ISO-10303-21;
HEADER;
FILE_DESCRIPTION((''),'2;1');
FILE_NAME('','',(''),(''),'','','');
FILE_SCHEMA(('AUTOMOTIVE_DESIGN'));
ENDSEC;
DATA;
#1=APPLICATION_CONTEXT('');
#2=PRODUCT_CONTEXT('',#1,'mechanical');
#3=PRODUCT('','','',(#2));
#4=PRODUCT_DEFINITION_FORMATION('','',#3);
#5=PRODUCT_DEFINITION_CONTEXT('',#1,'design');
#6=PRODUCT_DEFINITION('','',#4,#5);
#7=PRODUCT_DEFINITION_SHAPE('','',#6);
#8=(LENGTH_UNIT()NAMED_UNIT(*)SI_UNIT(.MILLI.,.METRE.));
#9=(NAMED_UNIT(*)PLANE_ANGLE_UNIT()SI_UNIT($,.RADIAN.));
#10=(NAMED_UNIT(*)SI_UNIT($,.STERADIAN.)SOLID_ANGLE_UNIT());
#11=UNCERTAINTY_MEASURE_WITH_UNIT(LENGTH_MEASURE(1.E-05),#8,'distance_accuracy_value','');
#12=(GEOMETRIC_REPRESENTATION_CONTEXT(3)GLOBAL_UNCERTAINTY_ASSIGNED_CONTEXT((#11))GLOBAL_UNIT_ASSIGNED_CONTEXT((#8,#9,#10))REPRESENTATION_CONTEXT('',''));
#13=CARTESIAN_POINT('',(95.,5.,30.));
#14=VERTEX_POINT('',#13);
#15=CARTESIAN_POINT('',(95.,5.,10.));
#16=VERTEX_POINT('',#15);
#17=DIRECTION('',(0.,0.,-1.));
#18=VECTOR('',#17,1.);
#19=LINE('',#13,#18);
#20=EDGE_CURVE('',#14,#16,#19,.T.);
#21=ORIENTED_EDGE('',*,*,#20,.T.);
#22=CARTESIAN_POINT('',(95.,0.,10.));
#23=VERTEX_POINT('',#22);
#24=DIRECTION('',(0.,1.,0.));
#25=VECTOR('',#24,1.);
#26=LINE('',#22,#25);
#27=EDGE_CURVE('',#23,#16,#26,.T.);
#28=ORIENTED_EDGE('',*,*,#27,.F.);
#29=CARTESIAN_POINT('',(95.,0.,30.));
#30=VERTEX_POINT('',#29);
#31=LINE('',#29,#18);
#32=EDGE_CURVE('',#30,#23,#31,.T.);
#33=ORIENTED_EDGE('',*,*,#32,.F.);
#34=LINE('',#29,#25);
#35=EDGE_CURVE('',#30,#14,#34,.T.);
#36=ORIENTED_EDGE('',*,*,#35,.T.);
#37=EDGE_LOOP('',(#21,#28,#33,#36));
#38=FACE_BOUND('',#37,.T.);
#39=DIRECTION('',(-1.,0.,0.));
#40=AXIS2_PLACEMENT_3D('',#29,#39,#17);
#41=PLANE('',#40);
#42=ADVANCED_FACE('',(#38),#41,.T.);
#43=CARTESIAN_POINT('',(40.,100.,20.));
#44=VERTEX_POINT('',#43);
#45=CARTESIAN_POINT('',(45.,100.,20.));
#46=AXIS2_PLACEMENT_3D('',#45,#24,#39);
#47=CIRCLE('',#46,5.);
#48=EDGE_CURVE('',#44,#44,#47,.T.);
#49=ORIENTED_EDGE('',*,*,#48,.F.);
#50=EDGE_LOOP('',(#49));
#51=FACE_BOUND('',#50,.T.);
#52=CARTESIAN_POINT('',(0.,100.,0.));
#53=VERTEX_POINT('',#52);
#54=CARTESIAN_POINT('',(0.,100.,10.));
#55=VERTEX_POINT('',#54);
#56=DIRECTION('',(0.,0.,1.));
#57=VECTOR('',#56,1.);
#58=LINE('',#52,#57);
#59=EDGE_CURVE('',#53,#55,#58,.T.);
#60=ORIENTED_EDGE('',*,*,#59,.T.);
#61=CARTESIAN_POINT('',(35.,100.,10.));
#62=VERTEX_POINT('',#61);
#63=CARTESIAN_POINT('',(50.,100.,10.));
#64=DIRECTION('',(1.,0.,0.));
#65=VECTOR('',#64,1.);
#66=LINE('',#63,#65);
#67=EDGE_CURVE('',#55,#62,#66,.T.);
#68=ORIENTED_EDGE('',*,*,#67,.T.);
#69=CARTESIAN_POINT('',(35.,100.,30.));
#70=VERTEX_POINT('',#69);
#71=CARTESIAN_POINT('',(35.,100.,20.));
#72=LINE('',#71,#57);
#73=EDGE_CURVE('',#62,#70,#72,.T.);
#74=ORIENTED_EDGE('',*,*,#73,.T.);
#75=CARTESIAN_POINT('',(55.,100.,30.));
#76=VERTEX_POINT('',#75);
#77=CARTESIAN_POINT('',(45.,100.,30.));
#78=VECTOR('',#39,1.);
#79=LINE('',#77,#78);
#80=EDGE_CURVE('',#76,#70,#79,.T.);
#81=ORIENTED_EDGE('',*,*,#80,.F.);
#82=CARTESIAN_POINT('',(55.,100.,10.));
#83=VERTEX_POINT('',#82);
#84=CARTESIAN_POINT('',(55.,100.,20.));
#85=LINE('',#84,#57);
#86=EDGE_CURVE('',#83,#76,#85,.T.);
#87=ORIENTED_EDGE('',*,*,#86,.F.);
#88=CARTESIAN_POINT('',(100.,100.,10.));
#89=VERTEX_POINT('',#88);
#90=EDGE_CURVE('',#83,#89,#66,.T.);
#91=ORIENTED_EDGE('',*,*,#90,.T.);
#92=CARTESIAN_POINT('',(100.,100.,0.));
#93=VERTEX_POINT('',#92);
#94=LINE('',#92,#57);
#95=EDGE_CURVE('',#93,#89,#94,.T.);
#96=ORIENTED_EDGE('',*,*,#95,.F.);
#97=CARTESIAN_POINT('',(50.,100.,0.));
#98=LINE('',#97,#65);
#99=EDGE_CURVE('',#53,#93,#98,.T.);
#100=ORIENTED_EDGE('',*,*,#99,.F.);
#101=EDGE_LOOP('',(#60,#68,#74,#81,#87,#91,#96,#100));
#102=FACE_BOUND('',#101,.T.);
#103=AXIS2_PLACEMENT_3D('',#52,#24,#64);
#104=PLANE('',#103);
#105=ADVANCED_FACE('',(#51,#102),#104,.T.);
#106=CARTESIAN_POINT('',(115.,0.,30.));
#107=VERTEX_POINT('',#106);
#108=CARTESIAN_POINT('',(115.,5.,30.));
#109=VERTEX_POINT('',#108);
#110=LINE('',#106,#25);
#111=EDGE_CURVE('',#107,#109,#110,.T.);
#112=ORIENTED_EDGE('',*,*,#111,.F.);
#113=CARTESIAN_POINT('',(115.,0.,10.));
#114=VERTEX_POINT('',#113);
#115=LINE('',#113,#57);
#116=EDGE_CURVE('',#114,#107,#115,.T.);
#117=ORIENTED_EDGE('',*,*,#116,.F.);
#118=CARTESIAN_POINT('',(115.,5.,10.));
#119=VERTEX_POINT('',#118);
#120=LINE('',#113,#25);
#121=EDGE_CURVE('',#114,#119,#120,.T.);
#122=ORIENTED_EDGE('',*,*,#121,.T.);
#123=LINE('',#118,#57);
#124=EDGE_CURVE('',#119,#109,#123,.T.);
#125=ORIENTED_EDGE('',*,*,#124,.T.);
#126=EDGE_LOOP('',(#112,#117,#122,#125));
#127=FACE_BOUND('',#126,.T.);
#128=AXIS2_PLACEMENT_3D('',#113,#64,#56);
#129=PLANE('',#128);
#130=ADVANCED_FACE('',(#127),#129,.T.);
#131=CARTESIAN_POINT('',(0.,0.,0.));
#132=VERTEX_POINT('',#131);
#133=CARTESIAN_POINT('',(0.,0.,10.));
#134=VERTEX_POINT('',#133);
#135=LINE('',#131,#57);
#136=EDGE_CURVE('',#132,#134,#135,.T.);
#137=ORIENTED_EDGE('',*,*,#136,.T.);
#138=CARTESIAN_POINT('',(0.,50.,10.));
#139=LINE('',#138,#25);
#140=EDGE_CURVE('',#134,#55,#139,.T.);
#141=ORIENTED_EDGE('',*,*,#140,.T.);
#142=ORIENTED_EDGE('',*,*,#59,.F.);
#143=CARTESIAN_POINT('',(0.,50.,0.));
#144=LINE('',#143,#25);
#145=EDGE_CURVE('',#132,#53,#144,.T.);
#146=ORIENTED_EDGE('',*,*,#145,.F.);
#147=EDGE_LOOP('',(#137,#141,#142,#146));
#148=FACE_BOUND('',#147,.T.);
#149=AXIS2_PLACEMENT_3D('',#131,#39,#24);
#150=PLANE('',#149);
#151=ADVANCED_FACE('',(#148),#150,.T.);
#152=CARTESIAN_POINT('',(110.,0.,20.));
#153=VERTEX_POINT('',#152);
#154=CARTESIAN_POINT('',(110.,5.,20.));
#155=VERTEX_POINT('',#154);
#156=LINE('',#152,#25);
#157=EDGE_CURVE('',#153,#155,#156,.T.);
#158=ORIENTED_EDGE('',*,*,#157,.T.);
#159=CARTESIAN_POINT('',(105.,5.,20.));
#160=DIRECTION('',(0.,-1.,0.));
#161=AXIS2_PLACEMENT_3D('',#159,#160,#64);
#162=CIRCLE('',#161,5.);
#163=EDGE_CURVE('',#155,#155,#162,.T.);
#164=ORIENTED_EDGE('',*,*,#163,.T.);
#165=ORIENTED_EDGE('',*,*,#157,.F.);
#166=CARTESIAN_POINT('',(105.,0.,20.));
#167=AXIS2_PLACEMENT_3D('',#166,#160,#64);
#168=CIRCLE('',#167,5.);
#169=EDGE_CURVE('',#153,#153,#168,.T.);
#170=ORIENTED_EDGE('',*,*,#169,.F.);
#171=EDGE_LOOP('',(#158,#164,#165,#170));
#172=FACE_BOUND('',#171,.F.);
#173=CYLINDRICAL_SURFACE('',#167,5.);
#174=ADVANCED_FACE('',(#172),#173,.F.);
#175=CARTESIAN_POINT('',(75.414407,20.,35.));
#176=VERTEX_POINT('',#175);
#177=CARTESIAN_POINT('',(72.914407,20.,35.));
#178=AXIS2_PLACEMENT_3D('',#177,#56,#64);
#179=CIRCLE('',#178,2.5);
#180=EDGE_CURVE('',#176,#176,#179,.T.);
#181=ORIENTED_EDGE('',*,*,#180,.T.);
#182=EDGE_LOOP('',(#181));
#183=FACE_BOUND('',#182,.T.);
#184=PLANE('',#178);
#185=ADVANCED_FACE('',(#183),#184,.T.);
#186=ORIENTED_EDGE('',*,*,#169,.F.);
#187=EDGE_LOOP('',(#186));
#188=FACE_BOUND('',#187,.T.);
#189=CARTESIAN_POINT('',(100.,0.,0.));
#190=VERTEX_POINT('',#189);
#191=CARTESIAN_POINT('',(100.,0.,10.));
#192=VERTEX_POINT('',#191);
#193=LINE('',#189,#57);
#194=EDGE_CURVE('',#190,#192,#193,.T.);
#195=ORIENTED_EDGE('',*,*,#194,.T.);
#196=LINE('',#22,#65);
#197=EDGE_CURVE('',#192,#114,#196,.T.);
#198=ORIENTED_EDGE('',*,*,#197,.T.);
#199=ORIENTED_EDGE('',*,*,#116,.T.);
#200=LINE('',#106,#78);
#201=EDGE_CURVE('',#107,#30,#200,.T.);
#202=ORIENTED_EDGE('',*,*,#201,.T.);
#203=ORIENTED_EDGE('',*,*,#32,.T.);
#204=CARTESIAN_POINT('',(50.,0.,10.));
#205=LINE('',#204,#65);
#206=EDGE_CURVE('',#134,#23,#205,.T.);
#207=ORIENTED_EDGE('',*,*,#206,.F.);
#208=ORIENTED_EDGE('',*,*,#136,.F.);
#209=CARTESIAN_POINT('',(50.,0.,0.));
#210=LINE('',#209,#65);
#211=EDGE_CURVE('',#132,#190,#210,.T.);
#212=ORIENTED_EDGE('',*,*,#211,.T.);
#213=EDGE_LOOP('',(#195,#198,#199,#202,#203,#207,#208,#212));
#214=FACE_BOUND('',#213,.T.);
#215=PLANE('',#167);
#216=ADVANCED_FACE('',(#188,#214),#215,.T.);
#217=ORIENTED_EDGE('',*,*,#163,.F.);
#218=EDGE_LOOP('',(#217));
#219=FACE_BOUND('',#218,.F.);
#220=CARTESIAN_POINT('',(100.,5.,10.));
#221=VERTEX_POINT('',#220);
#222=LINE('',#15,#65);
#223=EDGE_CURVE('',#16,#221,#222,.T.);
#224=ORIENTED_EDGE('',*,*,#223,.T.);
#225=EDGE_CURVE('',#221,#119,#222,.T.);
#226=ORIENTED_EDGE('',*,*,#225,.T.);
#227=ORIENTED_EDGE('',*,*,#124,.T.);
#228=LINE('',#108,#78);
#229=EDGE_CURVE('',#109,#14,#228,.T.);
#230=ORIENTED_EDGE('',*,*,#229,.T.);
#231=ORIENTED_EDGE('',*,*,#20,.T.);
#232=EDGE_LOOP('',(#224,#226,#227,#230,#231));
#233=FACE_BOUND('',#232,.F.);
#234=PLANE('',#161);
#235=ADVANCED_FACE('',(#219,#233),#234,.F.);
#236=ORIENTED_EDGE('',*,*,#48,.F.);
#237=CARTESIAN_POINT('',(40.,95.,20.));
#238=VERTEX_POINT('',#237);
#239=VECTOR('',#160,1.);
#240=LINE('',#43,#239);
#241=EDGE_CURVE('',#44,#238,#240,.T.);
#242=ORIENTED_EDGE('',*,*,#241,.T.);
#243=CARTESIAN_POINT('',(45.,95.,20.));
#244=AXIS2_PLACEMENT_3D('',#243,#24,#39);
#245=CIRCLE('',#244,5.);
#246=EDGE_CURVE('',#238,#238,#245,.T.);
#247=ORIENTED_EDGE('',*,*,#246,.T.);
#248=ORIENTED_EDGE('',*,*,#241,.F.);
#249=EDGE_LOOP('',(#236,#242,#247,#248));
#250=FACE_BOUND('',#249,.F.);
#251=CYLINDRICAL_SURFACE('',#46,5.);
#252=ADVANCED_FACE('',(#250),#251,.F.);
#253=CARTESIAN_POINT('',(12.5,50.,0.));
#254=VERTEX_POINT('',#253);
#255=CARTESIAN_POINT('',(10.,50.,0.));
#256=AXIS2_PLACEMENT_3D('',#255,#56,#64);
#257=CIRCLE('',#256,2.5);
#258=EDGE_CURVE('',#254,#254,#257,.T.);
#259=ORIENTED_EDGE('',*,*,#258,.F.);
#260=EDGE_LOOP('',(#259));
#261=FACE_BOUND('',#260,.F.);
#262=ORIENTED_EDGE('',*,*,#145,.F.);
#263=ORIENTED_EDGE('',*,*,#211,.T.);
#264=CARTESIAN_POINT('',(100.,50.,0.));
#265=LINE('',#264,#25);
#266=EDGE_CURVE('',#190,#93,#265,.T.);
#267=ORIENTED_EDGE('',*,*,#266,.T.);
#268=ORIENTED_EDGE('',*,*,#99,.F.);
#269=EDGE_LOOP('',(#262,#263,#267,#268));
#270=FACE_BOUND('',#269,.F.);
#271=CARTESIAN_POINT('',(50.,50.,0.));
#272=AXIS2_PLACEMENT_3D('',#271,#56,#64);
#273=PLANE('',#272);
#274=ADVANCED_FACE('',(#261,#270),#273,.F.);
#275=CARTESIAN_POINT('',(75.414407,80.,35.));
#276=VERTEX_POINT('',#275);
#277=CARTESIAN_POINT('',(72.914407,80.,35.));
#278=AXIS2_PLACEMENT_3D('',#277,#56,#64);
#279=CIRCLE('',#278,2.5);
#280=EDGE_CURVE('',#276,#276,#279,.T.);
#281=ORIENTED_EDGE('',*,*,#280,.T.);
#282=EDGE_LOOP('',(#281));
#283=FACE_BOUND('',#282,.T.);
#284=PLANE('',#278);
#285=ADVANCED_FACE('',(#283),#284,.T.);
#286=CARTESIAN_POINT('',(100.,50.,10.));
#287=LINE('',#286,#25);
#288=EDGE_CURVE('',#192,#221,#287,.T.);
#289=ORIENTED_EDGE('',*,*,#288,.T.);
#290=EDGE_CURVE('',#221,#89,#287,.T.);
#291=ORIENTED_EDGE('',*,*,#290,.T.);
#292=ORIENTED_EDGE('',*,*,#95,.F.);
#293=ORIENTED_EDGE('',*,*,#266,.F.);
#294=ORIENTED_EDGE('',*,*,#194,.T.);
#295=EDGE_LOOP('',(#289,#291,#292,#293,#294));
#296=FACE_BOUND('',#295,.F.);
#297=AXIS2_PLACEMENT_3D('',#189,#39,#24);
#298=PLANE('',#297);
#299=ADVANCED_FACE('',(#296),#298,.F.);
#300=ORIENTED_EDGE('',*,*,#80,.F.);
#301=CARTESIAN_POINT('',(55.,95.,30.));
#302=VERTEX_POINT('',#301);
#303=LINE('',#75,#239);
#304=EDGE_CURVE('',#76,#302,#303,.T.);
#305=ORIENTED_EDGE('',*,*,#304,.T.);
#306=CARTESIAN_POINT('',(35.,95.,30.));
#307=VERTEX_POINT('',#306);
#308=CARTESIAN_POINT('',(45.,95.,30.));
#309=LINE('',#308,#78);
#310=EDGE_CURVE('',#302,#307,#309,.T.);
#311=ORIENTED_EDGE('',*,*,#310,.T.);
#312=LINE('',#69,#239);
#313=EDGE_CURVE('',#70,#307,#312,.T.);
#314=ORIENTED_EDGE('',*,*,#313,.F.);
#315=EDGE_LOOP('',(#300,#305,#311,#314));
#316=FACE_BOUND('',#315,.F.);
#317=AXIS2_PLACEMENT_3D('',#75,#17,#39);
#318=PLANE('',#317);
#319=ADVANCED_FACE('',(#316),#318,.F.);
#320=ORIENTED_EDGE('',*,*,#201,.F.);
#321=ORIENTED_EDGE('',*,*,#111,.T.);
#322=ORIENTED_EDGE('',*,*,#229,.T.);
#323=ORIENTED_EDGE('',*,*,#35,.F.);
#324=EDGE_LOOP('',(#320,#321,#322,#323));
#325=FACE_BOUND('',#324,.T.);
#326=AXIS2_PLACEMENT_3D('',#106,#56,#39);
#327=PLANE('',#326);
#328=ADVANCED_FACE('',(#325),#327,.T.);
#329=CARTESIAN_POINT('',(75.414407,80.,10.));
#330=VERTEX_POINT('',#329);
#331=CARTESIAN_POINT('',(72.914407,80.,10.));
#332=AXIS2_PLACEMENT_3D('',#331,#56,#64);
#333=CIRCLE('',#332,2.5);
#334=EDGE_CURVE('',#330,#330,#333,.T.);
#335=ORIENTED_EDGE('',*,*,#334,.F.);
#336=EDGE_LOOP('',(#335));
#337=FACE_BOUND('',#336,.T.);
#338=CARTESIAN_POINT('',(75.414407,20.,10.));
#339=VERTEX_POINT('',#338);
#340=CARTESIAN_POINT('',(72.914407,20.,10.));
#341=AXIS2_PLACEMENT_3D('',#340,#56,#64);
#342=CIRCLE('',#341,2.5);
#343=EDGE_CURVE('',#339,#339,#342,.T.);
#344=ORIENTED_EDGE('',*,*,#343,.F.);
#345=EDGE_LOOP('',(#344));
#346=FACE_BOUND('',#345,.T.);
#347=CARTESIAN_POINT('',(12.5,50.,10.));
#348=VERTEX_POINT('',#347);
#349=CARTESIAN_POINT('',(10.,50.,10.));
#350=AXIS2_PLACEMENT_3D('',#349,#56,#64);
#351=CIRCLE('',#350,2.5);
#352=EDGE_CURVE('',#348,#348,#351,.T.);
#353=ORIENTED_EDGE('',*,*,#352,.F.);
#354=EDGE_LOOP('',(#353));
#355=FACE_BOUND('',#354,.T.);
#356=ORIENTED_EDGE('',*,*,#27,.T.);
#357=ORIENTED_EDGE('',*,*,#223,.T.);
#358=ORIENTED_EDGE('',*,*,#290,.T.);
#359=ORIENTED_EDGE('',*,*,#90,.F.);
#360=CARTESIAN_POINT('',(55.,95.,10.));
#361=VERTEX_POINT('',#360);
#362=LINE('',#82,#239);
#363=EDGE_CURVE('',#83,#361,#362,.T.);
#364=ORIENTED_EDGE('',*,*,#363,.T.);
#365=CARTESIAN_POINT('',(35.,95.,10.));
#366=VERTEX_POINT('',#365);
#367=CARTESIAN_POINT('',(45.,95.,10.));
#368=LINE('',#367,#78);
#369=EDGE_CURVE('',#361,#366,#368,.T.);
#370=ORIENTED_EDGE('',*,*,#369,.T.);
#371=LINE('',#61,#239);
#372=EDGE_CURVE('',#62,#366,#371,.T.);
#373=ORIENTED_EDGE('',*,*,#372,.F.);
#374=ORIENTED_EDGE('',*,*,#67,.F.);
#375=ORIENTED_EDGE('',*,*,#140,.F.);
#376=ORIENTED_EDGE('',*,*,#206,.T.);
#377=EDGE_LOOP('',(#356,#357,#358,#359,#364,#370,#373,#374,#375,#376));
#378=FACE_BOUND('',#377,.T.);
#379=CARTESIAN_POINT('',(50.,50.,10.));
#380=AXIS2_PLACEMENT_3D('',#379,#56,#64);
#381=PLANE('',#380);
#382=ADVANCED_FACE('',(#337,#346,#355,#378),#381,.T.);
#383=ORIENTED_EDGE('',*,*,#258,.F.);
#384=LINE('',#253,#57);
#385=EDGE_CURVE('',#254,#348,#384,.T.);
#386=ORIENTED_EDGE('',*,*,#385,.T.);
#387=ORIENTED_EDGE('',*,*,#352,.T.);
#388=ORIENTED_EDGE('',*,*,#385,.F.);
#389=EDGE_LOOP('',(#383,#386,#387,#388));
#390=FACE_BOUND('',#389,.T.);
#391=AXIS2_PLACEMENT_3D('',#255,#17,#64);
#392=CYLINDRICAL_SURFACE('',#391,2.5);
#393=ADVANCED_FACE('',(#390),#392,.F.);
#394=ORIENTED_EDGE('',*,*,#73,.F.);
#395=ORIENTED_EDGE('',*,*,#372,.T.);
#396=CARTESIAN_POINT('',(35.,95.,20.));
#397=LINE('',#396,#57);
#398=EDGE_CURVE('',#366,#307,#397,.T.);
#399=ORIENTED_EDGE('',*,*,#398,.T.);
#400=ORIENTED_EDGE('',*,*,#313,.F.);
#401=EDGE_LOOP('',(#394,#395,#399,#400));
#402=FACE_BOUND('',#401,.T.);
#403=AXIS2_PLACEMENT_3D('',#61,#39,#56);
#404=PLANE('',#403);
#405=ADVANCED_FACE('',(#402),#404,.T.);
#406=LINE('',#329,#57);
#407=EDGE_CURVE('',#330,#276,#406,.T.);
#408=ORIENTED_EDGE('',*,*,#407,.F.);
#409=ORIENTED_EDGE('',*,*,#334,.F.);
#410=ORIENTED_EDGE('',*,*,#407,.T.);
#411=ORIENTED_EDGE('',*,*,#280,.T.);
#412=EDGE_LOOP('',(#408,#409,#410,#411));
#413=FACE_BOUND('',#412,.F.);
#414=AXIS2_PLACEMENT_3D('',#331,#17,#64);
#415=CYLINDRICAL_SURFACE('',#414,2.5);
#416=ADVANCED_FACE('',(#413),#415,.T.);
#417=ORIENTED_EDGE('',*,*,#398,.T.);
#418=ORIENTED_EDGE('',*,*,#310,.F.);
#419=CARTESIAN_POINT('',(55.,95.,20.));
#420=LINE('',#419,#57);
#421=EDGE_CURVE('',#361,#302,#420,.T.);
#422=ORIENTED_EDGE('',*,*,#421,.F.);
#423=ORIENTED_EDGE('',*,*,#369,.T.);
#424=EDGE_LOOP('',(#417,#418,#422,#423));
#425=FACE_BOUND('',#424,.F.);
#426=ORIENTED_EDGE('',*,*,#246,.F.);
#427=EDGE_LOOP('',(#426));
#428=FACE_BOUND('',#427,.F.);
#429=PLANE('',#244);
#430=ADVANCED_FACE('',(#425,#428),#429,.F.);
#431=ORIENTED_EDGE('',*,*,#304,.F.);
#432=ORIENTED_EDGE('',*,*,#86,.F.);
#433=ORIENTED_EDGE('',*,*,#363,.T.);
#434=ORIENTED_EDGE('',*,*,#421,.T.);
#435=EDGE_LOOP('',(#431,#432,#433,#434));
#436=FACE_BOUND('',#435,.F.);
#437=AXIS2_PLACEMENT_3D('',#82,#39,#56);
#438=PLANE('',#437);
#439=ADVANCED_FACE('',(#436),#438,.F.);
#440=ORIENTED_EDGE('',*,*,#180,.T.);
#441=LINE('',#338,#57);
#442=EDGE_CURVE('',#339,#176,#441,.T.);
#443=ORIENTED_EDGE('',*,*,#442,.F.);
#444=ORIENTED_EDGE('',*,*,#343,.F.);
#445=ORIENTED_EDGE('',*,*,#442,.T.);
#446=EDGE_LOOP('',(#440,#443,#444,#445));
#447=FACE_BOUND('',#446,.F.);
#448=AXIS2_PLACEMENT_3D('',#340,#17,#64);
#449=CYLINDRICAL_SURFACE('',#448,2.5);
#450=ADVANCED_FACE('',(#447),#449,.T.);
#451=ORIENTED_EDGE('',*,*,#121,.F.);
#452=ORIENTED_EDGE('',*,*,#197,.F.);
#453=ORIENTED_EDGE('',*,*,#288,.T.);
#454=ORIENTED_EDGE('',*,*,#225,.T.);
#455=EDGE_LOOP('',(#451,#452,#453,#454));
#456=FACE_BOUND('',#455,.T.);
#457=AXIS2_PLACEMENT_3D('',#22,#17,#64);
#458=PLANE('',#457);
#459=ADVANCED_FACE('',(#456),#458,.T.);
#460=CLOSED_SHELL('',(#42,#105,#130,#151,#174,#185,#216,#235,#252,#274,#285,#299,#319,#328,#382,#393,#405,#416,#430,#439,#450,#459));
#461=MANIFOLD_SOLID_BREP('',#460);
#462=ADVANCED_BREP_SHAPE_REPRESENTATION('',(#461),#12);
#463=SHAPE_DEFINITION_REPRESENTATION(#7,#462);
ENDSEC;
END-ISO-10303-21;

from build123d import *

# Parameters (mm, degrees)
F0_W     = 100
F0_H     = 100
F0_R     = 2.5
F1_DEPTH = 10
F2_R     = 2.5
F3_DEPTH = 25
F4_W     = 20
F4_H     = 20
F5_DEPTH = 5
F6_R     = 5
F7_DEPTH = 25
F8_R     = 5
F9_DEPTH = 5


with BuildPart() as f1:
    # F0 (on Top) → F1 (new body)
    with BuildSketch(Plane.XY):
        with Locations((50, 50)):
            Rectangle(F0_W, F0_H)
        with Locations((10, 50)):
            Circle(F0_R, mode=Mode.SUBTRACT)
    extrude(amount=F1_DEPTH)

    # F2 (on face) → F3 (join)
    with BuildSketch(Plane.XY.offset(10)):
        with Locations((72.9144066572, 20)):
            Circle(F2_R)
        with Locations((72.9144066572, 80)):
            Circle(F2_R)
    extrude(amount=F3_DEPTH)

    # F4 (on face) → F5 (join)
    with BuildSketch(Plane(origin=(0, 100, 0), x_dir=(-1, 0, 0), z_dir=(0, 1, 0))):
        with Locations((-45, 20)):
            Rectangle(F4_W, F4_H)
    extrude(amount=-F5_DEPTH)

    # F6 (on face) → F7 (cut)
    with BuildSketch(Plane(origin=(0, 100, 0), x_dir=(-1, 0, 0), z_dir=(0, 1, 0))):
        with Locations((-45, 20)):
            Circle(F6_R)
    extrude(amount=-F7_DEPTH, mode=Mode.SUBTRACT)

    # F8 (on face) → F9 (join)
    with BuildSketch(Plane.XZ):
        Polygon((95, 30), (95, 10), (100, 10), (115, 10), (115, 30), align=None)
        with Locations((105, 20)):
            Circle(F8_R, mode=Mode.SUBTRACT)
    extrude(amount=-F9_DEPTH)


solid = f1.part
